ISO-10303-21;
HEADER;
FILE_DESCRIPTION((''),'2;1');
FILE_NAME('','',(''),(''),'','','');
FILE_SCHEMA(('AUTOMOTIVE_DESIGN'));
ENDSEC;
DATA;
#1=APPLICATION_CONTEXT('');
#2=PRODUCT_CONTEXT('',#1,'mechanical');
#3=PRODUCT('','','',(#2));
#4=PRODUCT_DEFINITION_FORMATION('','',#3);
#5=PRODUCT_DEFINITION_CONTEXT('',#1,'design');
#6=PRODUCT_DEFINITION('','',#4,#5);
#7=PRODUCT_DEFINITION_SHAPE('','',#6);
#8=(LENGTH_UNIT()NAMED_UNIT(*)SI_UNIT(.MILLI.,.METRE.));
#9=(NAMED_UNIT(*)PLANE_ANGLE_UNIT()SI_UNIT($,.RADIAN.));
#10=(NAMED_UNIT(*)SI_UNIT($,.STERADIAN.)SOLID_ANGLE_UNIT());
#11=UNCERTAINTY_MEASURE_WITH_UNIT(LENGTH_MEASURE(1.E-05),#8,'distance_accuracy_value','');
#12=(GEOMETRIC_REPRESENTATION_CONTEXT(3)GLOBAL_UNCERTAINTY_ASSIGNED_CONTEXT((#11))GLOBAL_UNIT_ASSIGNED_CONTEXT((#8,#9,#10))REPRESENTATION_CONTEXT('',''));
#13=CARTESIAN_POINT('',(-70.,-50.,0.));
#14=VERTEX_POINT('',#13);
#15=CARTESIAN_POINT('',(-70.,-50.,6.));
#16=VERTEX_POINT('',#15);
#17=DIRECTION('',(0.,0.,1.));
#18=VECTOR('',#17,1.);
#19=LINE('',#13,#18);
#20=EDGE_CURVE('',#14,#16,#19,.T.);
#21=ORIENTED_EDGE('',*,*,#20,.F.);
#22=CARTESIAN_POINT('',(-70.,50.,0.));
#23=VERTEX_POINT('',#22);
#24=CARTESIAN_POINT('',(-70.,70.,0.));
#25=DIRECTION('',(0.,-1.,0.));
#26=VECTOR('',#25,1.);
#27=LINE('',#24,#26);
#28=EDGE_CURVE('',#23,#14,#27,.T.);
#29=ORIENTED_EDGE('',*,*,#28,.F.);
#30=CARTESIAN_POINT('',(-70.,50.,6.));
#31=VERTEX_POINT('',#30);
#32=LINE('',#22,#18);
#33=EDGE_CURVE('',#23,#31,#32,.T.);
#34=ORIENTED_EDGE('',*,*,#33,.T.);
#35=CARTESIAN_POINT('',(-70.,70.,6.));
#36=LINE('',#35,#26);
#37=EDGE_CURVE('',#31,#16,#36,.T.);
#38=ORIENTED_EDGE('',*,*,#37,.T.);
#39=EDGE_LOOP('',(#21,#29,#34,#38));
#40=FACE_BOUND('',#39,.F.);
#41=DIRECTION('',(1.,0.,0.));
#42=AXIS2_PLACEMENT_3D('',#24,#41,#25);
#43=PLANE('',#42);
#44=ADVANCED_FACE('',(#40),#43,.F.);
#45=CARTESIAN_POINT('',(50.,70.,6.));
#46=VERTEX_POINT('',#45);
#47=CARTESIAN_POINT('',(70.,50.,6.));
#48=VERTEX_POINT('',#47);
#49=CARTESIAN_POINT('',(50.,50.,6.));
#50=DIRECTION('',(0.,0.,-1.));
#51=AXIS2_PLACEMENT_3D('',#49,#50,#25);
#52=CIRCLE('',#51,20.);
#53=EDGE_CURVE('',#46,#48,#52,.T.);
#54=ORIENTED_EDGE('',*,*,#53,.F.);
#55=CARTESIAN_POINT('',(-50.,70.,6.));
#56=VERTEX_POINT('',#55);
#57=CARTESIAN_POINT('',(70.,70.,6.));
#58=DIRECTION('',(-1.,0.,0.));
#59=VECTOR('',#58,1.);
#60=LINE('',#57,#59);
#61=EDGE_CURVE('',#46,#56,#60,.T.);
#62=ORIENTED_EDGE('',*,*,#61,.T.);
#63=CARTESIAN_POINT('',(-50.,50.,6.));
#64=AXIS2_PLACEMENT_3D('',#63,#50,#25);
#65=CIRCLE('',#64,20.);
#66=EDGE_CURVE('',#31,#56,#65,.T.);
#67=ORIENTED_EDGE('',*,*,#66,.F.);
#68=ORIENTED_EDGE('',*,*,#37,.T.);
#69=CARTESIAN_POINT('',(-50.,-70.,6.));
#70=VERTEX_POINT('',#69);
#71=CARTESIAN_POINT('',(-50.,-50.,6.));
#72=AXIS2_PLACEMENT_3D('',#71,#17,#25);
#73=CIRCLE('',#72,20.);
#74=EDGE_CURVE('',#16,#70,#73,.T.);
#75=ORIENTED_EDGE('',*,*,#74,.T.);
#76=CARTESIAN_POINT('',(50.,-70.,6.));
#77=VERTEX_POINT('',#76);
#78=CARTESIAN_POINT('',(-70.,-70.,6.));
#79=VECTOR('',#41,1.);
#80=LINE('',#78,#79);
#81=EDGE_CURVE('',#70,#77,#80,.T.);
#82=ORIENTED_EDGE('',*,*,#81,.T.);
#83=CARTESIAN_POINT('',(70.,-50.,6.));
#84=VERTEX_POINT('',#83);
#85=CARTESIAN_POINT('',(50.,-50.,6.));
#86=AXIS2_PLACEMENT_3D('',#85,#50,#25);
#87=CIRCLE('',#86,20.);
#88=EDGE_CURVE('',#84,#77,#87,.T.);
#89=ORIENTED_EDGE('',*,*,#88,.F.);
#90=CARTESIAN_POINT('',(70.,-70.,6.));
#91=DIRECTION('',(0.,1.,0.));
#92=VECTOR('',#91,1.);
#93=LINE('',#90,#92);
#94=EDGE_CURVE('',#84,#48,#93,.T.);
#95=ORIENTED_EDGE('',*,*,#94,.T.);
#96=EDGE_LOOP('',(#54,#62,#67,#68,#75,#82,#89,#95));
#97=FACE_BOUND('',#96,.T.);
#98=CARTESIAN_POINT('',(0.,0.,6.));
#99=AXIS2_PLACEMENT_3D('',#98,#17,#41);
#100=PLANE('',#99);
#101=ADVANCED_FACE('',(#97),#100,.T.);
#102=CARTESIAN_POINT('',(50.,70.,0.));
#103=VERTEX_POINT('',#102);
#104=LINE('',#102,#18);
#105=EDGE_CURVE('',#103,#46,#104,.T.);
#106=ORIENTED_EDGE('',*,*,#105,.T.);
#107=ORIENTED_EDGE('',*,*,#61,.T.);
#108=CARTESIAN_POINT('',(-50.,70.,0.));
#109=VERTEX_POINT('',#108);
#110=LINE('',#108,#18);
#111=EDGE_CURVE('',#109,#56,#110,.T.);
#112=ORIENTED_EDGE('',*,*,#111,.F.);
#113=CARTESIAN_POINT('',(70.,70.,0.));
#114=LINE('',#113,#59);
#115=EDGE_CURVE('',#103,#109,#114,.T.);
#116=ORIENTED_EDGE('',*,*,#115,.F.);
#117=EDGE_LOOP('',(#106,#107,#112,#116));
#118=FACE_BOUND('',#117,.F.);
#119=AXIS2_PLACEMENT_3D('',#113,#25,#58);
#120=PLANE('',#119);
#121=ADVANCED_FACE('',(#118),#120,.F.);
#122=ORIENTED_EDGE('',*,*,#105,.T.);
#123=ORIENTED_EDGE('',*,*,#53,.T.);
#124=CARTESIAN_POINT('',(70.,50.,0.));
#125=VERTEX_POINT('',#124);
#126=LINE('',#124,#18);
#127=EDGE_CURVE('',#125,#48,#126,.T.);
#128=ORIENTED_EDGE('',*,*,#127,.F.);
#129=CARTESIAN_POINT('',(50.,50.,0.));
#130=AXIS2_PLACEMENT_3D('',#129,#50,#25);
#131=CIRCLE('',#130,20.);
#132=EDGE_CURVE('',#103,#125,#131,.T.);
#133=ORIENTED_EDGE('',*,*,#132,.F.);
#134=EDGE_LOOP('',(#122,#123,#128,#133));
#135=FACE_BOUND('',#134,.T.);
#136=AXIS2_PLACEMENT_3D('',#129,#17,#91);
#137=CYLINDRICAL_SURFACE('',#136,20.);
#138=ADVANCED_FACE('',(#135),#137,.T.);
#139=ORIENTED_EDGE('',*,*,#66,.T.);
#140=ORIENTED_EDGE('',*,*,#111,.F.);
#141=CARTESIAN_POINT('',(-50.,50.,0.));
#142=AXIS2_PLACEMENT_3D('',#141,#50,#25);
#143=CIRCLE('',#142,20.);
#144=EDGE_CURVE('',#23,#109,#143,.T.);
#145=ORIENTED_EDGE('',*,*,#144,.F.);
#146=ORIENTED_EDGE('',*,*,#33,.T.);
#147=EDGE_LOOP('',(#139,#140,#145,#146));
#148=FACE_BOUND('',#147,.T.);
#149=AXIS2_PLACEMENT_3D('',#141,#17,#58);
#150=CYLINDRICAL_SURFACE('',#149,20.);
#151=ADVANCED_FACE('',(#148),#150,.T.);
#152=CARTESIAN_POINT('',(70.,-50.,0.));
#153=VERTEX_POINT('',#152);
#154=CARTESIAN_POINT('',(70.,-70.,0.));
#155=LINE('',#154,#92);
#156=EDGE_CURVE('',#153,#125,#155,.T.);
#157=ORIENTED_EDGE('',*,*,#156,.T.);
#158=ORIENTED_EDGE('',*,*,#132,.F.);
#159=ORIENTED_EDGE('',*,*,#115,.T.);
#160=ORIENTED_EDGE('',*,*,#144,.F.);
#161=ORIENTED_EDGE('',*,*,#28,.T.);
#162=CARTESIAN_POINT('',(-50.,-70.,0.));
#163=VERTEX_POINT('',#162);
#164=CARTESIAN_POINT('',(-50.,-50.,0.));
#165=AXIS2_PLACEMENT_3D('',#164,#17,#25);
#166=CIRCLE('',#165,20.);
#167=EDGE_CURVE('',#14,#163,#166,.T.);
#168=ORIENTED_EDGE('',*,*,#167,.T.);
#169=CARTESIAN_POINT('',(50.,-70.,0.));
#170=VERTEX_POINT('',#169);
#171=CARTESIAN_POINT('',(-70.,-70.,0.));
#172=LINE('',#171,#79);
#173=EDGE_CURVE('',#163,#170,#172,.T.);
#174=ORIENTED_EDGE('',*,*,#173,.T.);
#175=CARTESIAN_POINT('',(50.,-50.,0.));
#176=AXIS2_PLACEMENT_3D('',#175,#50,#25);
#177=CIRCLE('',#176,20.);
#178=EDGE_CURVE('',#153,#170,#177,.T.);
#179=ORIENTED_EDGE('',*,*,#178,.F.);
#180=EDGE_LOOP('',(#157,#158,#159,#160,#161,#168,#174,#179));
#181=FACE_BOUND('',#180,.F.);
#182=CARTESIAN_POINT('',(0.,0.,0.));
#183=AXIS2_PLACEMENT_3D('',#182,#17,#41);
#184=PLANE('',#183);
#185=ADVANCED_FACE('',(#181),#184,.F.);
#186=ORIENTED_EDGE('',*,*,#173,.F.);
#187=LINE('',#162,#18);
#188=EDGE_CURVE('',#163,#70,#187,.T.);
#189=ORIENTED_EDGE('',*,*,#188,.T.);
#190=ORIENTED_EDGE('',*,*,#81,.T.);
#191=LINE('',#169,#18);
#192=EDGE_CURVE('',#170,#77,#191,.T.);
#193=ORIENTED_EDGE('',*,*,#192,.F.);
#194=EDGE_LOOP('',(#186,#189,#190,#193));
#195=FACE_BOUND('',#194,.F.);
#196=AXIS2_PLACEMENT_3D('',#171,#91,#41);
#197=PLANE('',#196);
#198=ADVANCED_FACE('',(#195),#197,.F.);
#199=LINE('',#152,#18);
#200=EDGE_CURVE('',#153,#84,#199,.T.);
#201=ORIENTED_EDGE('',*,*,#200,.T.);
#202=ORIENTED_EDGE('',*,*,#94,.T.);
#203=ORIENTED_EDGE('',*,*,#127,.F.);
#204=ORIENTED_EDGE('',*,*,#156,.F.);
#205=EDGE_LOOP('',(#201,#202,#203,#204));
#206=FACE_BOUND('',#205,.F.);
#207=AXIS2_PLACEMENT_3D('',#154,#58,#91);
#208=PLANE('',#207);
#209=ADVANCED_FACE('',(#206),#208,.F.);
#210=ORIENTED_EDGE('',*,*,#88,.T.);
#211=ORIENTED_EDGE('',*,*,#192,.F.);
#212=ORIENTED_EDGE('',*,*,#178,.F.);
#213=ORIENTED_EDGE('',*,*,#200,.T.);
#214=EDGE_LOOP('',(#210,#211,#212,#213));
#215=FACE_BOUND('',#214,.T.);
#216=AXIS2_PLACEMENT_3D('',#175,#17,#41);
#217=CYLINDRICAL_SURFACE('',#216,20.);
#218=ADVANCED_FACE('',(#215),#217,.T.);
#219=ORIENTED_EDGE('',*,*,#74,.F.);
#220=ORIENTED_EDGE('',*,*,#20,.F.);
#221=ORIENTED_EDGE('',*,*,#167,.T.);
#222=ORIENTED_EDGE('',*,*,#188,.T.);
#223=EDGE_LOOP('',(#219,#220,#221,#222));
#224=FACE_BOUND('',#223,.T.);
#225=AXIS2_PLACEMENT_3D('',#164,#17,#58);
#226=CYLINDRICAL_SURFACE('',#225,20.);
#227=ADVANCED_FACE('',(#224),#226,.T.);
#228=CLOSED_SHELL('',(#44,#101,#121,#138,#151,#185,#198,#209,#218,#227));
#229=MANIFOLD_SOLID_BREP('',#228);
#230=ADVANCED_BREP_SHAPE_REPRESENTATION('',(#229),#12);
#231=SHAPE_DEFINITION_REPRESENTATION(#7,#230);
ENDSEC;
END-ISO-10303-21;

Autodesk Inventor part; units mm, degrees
ref_plane "YZ Plane" through (0, 0, 0) normal (1, 0, 0) x (0, 1, 0)
ref_plane "XZ Plane" through (0, 0, 0) normal (0, 1, 0) x (-1, 0, 0)
ref_plane "XY Plane" through (0, 0, 0) normal (0, 0, 1) x (1, 0, 0)
sketch "Sketch1" plane through (0, 0, 0) normal (0, 0, 1) x (1, 0, 0)
  line L0 (-70, -70) -> (70, -70)
  line L1 (70, -70) -> (70, 70)
  line L2 (70, 70) -> (-70, 70)
  line L3 (-70, 70) -> (-70, -70)
  line L4 (-70, -70) -> (70, 70) construction
  line L5 (70, -70) -> (-70, 70) construction
  point P0 (0, 0)
  dimension "d0" = 140
  dimension "d1" = 140
extrude "Plate1" add sketch "Sketch1" along normal blind 6
fillet "Corner Round1" radius 20 4 edges at (70, -70, 3) (-70, -70, 3) (-70, 70, 3) (70, 70, 3)
equation "\"d0\" = d1"
equation "\"d2\" = Thickness"
equation "\"BendReliefWidth\" = Thickness"
equation "\"BendReliefDepth\" = 0.5 * Thickness"
equation "\"CornerReliefSize\" = 4 * Thickness"
equation "\"MinimumRemnant\" = 2 * Thickness"
equation "\"TransitionRadius\" = BendRadius"
equation "\"JacobiRadiusSize\" = BendRadius"
equation "\"GapSize\" = Thickness"
equation "\"Thickness\" = 6"
equation "\"BendRadius\" = 5"
properties part number "PNS-682 leg plate for filter" material "Stainless Steel"
